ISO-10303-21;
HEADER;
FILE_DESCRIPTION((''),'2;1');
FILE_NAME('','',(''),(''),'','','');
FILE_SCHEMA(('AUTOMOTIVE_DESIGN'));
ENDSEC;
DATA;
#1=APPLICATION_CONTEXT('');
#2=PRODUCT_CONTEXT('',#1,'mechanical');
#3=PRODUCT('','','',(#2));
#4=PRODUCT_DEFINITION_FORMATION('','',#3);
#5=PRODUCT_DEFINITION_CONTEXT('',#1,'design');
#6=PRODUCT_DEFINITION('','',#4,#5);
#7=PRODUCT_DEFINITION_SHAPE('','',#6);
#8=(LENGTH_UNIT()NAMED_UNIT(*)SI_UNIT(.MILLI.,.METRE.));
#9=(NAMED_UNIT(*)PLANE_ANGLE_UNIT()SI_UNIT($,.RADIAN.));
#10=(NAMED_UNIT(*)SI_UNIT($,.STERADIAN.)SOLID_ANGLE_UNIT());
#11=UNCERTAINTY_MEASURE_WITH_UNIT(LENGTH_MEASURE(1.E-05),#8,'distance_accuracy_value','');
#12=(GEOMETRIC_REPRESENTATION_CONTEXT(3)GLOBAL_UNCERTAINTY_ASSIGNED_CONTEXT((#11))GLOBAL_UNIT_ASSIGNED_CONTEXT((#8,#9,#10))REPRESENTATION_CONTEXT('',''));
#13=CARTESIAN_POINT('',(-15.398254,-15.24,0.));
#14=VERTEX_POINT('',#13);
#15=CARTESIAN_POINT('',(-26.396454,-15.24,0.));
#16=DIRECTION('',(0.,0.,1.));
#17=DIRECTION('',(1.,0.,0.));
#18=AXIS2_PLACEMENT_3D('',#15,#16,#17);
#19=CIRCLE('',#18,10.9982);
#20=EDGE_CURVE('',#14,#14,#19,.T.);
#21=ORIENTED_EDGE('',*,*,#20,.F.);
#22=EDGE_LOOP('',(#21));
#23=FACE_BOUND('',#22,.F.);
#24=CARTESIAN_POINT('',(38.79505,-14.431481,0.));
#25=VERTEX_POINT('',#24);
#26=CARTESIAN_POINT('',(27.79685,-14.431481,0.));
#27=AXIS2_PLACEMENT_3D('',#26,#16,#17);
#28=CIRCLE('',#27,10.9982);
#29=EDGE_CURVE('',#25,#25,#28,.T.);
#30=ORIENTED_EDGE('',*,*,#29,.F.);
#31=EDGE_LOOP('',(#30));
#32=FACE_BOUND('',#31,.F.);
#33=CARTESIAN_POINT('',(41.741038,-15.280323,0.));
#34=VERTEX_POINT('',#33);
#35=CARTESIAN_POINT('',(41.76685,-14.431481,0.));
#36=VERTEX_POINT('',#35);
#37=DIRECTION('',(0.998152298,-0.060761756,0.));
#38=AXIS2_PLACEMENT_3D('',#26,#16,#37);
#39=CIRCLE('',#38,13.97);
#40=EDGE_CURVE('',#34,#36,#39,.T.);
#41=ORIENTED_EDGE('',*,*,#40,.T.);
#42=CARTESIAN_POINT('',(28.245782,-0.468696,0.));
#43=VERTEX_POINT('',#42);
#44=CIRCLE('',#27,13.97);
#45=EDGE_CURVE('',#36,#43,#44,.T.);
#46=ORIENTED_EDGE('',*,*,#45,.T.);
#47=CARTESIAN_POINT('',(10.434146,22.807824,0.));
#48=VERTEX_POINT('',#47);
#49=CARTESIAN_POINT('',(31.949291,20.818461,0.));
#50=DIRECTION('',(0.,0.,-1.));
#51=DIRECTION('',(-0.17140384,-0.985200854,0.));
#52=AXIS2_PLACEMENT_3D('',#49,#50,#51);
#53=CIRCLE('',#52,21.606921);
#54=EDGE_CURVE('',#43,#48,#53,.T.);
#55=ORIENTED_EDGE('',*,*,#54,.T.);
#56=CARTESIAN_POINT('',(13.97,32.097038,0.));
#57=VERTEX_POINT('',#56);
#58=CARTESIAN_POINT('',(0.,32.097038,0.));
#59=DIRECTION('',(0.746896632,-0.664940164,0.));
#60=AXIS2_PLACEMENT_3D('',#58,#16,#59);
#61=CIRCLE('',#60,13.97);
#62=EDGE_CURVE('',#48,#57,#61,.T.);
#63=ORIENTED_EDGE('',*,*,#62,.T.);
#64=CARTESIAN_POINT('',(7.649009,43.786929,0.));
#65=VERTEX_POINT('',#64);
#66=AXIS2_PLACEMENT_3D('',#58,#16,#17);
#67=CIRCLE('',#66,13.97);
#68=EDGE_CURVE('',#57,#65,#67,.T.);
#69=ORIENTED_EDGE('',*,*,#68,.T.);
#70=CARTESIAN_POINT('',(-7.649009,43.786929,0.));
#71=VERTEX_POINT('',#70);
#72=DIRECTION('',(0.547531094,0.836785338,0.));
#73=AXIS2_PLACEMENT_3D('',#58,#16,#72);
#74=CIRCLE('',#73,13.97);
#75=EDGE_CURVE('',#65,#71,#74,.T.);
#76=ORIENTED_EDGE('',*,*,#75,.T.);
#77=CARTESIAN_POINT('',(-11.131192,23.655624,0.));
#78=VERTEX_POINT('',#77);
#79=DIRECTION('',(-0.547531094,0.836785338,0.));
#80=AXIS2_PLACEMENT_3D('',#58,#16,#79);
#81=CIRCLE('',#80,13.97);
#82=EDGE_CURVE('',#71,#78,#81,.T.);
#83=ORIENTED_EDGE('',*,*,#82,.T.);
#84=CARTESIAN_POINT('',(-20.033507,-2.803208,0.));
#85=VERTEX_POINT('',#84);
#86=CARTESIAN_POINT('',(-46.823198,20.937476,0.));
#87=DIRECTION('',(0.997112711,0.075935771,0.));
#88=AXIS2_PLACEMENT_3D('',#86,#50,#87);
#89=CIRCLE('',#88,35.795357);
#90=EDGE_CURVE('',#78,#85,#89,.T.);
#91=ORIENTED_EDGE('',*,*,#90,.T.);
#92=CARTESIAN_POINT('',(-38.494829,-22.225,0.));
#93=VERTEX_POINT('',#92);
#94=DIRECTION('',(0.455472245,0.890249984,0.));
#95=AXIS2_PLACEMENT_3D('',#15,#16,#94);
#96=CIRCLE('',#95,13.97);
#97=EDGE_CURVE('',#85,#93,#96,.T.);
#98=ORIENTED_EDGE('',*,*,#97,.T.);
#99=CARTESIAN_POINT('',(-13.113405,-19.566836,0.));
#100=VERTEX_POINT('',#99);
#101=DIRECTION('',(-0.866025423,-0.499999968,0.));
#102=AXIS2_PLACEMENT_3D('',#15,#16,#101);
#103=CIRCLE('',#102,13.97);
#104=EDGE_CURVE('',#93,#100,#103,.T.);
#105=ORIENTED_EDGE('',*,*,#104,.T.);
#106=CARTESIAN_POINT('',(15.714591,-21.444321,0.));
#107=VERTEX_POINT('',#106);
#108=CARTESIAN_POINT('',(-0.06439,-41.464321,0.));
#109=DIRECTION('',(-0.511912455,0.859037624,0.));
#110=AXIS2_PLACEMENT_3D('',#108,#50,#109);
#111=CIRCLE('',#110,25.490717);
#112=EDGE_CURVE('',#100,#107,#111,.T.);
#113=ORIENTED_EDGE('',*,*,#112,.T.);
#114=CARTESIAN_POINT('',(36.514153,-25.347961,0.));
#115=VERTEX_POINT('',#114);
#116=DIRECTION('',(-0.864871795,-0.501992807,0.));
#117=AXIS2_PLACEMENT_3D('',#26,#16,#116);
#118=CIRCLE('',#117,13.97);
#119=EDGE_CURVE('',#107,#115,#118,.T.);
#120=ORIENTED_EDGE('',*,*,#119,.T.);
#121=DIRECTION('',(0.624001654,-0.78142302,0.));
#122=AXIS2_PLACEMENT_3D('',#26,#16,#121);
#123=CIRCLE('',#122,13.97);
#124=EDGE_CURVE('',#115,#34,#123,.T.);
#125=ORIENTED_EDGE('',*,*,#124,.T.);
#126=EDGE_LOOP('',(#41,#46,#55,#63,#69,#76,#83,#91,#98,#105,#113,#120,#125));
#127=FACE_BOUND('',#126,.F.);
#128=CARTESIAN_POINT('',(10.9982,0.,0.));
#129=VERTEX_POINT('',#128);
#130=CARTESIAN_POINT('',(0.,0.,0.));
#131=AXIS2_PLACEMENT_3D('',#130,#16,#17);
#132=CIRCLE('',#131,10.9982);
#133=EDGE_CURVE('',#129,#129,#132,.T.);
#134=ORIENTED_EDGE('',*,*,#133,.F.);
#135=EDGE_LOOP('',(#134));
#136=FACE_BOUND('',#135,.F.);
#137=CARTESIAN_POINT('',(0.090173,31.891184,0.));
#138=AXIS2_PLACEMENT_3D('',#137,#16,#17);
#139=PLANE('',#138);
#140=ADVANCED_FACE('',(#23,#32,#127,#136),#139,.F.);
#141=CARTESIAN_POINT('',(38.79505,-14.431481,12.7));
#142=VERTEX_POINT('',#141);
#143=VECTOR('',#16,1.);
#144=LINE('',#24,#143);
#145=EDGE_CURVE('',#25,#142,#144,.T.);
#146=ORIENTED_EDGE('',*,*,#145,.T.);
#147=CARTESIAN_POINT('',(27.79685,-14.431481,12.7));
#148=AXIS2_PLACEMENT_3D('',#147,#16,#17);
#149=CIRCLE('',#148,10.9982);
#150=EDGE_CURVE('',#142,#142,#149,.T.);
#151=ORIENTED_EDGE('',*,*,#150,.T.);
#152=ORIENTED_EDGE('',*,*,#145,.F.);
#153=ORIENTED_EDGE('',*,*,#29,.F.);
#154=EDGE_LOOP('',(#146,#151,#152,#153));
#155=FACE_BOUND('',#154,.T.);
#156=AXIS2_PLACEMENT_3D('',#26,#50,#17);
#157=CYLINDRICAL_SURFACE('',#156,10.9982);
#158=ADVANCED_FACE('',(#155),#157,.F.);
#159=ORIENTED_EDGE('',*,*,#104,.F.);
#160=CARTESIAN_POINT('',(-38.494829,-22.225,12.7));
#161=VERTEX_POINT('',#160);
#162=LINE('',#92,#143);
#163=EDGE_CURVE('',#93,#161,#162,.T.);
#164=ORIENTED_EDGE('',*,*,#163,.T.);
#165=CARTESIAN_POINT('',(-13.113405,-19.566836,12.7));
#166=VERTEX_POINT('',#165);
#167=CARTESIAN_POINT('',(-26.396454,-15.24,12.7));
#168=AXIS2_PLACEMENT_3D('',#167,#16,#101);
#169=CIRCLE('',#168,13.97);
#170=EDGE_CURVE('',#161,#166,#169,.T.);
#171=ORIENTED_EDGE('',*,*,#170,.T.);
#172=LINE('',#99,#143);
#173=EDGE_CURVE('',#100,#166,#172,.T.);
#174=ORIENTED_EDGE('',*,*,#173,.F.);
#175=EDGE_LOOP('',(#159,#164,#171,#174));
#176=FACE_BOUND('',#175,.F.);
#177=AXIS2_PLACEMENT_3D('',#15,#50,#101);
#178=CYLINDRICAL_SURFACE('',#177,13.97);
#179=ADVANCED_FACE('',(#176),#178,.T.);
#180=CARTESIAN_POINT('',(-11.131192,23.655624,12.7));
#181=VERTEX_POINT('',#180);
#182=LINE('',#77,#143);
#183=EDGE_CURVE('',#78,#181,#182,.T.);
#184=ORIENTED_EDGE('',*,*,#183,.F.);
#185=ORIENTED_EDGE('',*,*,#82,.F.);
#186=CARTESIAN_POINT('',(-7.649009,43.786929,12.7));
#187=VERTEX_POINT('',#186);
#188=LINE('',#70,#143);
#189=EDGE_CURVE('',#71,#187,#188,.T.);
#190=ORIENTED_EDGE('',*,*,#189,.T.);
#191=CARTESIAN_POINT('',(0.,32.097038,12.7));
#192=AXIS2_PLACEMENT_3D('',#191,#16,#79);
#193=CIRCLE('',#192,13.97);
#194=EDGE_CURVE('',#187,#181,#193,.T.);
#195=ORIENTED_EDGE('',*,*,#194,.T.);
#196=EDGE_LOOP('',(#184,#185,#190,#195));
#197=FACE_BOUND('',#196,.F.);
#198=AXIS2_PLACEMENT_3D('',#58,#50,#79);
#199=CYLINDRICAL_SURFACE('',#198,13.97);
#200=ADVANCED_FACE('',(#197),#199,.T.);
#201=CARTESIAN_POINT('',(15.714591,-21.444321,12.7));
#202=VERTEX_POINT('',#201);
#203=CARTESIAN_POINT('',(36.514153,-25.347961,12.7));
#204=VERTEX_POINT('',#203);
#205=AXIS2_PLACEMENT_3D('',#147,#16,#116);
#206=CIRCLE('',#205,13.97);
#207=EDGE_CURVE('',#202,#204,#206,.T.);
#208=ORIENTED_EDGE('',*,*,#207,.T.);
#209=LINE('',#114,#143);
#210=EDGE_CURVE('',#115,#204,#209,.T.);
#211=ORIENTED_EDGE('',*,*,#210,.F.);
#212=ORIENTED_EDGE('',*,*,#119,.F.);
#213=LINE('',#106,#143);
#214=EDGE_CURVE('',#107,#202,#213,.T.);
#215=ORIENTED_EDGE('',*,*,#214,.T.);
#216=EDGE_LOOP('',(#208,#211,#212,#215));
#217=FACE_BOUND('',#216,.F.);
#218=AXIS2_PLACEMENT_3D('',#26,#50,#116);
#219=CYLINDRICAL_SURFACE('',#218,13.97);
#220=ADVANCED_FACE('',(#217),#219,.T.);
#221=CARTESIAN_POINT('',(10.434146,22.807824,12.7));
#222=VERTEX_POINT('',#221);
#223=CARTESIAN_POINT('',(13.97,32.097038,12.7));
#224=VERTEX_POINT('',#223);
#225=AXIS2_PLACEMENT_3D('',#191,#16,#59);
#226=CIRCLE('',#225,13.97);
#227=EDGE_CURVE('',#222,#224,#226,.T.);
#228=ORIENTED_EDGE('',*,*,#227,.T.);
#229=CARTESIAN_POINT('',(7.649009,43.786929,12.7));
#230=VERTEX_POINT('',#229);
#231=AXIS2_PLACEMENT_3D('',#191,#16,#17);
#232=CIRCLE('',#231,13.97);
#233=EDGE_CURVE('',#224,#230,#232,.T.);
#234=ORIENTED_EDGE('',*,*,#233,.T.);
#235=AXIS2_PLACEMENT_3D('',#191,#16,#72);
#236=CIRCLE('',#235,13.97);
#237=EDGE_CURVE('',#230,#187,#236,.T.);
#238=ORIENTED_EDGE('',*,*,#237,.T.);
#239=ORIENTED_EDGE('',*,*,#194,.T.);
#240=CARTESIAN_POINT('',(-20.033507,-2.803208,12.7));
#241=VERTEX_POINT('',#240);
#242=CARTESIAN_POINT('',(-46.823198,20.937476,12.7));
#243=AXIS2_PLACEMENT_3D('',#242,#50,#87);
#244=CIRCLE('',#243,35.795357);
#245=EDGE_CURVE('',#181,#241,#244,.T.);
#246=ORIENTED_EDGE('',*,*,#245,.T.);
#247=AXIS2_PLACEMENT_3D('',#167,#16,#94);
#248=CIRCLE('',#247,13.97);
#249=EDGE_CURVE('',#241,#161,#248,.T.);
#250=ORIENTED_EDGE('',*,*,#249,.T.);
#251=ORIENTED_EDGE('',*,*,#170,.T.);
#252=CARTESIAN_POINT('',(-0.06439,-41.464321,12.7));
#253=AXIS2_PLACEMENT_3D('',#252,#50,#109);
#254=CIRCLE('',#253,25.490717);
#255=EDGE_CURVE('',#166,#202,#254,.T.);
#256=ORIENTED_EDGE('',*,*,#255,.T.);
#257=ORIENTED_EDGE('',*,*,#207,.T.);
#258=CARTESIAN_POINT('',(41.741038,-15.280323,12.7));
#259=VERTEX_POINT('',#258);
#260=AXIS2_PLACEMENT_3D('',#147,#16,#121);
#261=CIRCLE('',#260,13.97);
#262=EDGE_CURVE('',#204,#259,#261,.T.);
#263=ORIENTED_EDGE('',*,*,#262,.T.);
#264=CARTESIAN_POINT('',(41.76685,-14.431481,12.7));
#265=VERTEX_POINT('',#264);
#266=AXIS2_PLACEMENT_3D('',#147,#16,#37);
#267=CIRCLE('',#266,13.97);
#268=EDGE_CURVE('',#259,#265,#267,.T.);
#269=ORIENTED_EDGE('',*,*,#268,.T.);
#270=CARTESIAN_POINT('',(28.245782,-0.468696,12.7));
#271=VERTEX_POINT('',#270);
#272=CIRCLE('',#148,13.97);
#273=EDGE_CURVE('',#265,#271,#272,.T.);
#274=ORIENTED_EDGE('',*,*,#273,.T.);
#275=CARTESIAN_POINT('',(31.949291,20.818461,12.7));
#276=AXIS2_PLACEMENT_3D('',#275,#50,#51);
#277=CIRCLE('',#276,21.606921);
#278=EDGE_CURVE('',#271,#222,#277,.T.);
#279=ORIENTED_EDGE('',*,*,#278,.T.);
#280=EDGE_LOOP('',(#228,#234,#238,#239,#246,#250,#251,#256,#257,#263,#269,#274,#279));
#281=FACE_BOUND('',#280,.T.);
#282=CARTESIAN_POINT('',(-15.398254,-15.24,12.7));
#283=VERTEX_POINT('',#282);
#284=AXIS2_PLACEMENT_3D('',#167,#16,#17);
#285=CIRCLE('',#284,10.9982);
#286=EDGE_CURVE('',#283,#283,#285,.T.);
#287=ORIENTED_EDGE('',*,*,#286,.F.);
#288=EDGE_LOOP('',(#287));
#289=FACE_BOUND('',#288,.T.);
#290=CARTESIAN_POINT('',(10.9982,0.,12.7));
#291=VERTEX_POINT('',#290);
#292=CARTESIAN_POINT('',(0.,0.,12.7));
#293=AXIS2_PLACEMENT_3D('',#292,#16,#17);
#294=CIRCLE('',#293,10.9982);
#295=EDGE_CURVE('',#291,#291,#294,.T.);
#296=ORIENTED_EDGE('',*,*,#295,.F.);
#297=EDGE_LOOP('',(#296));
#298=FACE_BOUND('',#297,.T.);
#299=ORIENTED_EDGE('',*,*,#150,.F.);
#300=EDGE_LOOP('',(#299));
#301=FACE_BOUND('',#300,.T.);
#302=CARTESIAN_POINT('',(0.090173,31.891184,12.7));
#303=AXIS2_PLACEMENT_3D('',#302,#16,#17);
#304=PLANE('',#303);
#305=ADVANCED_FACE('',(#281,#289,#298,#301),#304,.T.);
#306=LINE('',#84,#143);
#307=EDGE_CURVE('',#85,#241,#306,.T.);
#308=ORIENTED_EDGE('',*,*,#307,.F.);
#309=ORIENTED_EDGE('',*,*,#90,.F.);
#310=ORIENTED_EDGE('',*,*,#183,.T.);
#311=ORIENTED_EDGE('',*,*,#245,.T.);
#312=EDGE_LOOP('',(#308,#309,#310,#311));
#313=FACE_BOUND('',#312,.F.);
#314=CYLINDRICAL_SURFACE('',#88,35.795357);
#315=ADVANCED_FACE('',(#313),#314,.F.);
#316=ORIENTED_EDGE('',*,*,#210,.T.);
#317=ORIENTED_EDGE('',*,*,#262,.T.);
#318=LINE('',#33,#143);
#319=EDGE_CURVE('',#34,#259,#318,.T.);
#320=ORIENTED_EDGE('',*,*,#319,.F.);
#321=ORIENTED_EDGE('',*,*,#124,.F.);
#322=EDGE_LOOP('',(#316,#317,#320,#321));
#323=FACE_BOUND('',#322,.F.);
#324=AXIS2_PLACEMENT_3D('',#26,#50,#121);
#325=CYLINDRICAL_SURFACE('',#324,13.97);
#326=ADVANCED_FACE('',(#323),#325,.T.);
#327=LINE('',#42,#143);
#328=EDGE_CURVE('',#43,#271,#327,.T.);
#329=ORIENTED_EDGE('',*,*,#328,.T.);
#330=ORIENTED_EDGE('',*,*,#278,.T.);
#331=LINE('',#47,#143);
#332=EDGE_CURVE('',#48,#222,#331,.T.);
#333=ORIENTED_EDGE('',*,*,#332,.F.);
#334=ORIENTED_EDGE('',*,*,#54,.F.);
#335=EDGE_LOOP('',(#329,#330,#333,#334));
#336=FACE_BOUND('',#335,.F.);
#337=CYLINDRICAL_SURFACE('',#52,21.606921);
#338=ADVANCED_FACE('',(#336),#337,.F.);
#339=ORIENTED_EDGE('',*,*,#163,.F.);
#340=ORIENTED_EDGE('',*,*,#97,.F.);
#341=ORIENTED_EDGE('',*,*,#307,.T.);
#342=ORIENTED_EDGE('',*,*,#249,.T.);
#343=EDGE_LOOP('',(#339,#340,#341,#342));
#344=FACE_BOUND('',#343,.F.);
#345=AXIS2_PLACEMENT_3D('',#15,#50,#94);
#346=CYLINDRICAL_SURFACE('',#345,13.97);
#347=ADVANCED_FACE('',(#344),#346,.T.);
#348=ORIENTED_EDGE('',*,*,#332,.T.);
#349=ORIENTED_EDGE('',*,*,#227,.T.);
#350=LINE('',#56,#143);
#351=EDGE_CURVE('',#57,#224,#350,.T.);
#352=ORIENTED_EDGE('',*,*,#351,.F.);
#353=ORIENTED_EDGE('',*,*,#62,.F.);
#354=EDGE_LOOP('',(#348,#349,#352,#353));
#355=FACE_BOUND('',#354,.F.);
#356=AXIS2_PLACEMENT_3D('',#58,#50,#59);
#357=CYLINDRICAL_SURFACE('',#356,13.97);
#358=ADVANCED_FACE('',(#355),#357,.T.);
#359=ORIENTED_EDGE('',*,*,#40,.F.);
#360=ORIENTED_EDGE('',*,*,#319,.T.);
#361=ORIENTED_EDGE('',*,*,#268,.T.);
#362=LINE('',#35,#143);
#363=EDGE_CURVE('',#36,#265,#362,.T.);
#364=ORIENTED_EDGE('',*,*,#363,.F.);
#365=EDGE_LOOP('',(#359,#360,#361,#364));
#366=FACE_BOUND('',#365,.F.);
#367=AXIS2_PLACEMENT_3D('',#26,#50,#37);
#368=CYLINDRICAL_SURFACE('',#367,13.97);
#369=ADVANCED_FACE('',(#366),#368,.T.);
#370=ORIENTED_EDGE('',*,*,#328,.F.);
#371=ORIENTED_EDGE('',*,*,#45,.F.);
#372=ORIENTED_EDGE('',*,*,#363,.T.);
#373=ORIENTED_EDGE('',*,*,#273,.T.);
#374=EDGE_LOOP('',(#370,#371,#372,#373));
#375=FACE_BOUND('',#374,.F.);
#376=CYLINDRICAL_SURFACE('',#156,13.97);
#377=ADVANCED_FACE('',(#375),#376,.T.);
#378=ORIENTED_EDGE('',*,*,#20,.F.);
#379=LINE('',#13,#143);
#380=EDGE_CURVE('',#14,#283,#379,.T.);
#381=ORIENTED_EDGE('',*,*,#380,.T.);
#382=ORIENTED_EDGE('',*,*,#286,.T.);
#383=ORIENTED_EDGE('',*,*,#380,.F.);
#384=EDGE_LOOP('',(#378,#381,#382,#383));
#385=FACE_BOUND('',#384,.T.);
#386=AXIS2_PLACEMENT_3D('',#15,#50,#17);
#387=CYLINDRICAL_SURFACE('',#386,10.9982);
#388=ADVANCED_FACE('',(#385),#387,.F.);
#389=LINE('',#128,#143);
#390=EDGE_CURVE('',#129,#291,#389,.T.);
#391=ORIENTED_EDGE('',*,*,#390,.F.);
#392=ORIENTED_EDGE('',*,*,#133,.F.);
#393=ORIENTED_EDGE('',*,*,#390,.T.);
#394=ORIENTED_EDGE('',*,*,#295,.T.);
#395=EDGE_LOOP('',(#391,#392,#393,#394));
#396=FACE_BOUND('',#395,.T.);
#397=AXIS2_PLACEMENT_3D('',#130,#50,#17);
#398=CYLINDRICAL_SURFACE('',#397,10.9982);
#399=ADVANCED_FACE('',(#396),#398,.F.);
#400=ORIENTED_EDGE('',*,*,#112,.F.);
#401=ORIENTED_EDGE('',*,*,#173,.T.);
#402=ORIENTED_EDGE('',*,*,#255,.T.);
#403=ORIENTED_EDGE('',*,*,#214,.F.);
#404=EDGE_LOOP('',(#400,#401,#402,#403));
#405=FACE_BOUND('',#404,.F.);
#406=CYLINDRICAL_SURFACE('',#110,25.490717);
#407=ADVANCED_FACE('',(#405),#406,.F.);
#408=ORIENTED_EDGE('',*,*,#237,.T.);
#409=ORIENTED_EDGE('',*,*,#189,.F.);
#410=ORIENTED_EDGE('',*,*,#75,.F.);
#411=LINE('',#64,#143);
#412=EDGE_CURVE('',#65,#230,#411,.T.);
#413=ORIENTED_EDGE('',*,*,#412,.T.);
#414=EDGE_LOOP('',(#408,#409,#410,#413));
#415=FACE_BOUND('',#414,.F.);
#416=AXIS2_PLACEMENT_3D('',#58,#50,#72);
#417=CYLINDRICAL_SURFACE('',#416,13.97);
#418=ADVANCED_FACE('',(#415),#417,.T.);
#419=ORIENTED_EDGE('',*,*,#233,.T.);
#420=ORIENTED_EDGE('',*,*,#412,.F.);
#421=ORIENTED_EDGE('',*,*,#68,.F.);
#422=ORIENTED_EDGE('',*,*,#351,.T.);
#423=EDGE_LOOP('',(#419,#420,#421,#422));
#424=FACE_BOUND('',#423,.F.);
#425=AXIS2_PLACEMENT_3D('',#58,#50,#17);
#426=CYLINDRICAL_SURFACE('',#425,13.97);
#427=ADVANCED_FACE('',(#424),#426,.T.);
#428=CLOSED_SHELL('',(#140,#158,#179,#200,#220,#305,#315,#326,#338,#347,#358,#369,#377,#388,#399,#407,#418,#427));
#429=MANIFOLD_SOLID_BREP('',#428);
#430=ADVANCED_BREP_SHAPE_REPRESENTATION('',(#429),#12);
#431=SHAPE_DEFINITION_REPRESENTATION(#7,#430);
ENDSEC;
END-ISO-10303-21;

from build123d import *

# Parameters (mm, degrees)
F0_R     = 10.9982
F0_R_2   = 13.97
F1_DEPTH = 12.7


with BuildPart() as f1:
    # F0 (on Top) → F1 (new body)
    with BuildSketch(Plane.XY):
        with BuildLine():
            ThreePointArc((13.97, 32.0970378816), (12.2885629968, 38.7417440057), (7.6490093808, 43.7869290484))
            ThreePointArc((7.6490093808, 43.7869290484), (0, 44.45), (-7.6490093808, 43.7869290484))
            ThreePointArc((-7.6490093808, 43.7869290484), (-13.7655856932, 34.4781196782), (-11.1311920138, 23.6556242351))
            ThreePointArc((-11.1311920138, 23.6556242351), (-0.5487801971, 18.1378208443), (10.4341459432, 22.8078237902))
            ThreePointArc((10.4341459432, 22.8078237902), (13.0561464228, 27.1273356182), (13.97, 32.0970378816))
        make_face()
        with Locations((0, 32.0970378816)):
            Circle(F0_R, mode=Mode.SUBTRACT)
        with BuildLine():
            ThreePointArc((-7.6490093808, 43.7869290484), (0, 44.45), (7.6490093808, 43.7869290484))
            ThreePointArc((7.6490093808, 43.7869290484), (0, 46.0670378816), (-7.6490093808, 43.7869290484))
        make_face()
        with BuildLine():
            ThreePointArc((36.5141532997, -25.3479606439), (40.1954437919, -20.8685438007), (41.7410377882, -15.2803227832))
            ThreePointArc((41.7410377882, -15.2803227832), (39.4500705459, -20.4815632685), (36.5141532997, -25.3479606439))
        make_face()
        with BuildLine():
            ThreePointArc((36.5141532997, -25.3479606439), (39.4500705459, -20.4815632685), (41.7410377882, -15.2803227832))
            ThreePointArc((41.7410377882, -15.2803227832), (41.7603955997, -14.856098108), (41.7668501917, -14.4314810592))
            ThreePointArc((41.7668501917, -14.4314810592), (37.8325982415, -4.7132167552), (28.245782034, -0.4686962295))
            ThreePointArc((28.245782034, -0.4686962295), (15.8040282066, -7.2667674687), (15.7145912135, -21.4443205685))
            ThreePointArc((15.7145912135, -21.4443205685), (25.2199657431, -28.1617602457), (36.5141532997, -25.3479606439))
        make_face()
        with Locations((27.7968501917, -14.4314810592)):
            Circle(F0_R, mode=Mode.SUBTRACT)
        with BuildLine():
            ThreePointArc((-20.0335070466, -2.8032077223), (-36.5219312191, -5.6152601432), (-38.4948294602, -22.2249995463))
            ThreePointArc((-38.4948294602, -22.2249995463), (-24.9413525406, -29.134012338), (-13.1134053752, -19.5668361497))
            ThreePointArc((-13.1134053752, -19.5668361497), (-12.5992608684, -17.4305143709), (-12.4264543073, -15.24))
            ThreePointArc((-12.4264543073, -15.24), (-14.4790033796, -7.9506061031), (-20.0335070466, -2.8032077223))
        make_face()
        with Locations((-26.3964543073, -15.24)):
            Circle(F0_R, mode=Mode.SUBTRACT)
        with BuildLine():
            ThreePointArc((10.4341459432, 22.8078237902), (-0.5487801971, 18.1378208443), (-11.1311920138, 23.6556242351))
            ThreePointArc((-11.1311920138, 23.6556242351), (-12.8966882758, 9.5225930629), (-20.0335070466, -2.8032077223))
            ThreePointArc((-20.0335070466, -2.8032077223), (-14.4790033796, -7.9506061031), (-12.4264543073, -15.24))
            ThreePointArc((-12.4264543073, -15.24), (-12.5992608684, -17.4305143709), (-13.1134053752, -19.5668361497))
            ThreePointArc((-13.1134053752, -19.5668361497), (1.5922377479, -16.0274926586), (15.7145912135, -21.4443205685))
            ThreePointArc((15.7145912135, -21.4443205685), (15.8040282066, -7.2667674687), (28.245782034, -0.4686962295))
            ThreePointArc((28.245782034, -0.4686962295), (14.7899139444, 7.6877788952), (10.4341459432, 22.8078237902))
        make_face()
        Circle(F0_R_2, mode=Mode.SUBTRACT)
        with Locations((0, 32.0970378816)):
            Circle(F0_R)
        Circle(F0_R_2)
        Circle(F0_R, mode=Mode.SUBTRACT)
    extrude(amount=F1_DEPTH)


solid = f1.part
